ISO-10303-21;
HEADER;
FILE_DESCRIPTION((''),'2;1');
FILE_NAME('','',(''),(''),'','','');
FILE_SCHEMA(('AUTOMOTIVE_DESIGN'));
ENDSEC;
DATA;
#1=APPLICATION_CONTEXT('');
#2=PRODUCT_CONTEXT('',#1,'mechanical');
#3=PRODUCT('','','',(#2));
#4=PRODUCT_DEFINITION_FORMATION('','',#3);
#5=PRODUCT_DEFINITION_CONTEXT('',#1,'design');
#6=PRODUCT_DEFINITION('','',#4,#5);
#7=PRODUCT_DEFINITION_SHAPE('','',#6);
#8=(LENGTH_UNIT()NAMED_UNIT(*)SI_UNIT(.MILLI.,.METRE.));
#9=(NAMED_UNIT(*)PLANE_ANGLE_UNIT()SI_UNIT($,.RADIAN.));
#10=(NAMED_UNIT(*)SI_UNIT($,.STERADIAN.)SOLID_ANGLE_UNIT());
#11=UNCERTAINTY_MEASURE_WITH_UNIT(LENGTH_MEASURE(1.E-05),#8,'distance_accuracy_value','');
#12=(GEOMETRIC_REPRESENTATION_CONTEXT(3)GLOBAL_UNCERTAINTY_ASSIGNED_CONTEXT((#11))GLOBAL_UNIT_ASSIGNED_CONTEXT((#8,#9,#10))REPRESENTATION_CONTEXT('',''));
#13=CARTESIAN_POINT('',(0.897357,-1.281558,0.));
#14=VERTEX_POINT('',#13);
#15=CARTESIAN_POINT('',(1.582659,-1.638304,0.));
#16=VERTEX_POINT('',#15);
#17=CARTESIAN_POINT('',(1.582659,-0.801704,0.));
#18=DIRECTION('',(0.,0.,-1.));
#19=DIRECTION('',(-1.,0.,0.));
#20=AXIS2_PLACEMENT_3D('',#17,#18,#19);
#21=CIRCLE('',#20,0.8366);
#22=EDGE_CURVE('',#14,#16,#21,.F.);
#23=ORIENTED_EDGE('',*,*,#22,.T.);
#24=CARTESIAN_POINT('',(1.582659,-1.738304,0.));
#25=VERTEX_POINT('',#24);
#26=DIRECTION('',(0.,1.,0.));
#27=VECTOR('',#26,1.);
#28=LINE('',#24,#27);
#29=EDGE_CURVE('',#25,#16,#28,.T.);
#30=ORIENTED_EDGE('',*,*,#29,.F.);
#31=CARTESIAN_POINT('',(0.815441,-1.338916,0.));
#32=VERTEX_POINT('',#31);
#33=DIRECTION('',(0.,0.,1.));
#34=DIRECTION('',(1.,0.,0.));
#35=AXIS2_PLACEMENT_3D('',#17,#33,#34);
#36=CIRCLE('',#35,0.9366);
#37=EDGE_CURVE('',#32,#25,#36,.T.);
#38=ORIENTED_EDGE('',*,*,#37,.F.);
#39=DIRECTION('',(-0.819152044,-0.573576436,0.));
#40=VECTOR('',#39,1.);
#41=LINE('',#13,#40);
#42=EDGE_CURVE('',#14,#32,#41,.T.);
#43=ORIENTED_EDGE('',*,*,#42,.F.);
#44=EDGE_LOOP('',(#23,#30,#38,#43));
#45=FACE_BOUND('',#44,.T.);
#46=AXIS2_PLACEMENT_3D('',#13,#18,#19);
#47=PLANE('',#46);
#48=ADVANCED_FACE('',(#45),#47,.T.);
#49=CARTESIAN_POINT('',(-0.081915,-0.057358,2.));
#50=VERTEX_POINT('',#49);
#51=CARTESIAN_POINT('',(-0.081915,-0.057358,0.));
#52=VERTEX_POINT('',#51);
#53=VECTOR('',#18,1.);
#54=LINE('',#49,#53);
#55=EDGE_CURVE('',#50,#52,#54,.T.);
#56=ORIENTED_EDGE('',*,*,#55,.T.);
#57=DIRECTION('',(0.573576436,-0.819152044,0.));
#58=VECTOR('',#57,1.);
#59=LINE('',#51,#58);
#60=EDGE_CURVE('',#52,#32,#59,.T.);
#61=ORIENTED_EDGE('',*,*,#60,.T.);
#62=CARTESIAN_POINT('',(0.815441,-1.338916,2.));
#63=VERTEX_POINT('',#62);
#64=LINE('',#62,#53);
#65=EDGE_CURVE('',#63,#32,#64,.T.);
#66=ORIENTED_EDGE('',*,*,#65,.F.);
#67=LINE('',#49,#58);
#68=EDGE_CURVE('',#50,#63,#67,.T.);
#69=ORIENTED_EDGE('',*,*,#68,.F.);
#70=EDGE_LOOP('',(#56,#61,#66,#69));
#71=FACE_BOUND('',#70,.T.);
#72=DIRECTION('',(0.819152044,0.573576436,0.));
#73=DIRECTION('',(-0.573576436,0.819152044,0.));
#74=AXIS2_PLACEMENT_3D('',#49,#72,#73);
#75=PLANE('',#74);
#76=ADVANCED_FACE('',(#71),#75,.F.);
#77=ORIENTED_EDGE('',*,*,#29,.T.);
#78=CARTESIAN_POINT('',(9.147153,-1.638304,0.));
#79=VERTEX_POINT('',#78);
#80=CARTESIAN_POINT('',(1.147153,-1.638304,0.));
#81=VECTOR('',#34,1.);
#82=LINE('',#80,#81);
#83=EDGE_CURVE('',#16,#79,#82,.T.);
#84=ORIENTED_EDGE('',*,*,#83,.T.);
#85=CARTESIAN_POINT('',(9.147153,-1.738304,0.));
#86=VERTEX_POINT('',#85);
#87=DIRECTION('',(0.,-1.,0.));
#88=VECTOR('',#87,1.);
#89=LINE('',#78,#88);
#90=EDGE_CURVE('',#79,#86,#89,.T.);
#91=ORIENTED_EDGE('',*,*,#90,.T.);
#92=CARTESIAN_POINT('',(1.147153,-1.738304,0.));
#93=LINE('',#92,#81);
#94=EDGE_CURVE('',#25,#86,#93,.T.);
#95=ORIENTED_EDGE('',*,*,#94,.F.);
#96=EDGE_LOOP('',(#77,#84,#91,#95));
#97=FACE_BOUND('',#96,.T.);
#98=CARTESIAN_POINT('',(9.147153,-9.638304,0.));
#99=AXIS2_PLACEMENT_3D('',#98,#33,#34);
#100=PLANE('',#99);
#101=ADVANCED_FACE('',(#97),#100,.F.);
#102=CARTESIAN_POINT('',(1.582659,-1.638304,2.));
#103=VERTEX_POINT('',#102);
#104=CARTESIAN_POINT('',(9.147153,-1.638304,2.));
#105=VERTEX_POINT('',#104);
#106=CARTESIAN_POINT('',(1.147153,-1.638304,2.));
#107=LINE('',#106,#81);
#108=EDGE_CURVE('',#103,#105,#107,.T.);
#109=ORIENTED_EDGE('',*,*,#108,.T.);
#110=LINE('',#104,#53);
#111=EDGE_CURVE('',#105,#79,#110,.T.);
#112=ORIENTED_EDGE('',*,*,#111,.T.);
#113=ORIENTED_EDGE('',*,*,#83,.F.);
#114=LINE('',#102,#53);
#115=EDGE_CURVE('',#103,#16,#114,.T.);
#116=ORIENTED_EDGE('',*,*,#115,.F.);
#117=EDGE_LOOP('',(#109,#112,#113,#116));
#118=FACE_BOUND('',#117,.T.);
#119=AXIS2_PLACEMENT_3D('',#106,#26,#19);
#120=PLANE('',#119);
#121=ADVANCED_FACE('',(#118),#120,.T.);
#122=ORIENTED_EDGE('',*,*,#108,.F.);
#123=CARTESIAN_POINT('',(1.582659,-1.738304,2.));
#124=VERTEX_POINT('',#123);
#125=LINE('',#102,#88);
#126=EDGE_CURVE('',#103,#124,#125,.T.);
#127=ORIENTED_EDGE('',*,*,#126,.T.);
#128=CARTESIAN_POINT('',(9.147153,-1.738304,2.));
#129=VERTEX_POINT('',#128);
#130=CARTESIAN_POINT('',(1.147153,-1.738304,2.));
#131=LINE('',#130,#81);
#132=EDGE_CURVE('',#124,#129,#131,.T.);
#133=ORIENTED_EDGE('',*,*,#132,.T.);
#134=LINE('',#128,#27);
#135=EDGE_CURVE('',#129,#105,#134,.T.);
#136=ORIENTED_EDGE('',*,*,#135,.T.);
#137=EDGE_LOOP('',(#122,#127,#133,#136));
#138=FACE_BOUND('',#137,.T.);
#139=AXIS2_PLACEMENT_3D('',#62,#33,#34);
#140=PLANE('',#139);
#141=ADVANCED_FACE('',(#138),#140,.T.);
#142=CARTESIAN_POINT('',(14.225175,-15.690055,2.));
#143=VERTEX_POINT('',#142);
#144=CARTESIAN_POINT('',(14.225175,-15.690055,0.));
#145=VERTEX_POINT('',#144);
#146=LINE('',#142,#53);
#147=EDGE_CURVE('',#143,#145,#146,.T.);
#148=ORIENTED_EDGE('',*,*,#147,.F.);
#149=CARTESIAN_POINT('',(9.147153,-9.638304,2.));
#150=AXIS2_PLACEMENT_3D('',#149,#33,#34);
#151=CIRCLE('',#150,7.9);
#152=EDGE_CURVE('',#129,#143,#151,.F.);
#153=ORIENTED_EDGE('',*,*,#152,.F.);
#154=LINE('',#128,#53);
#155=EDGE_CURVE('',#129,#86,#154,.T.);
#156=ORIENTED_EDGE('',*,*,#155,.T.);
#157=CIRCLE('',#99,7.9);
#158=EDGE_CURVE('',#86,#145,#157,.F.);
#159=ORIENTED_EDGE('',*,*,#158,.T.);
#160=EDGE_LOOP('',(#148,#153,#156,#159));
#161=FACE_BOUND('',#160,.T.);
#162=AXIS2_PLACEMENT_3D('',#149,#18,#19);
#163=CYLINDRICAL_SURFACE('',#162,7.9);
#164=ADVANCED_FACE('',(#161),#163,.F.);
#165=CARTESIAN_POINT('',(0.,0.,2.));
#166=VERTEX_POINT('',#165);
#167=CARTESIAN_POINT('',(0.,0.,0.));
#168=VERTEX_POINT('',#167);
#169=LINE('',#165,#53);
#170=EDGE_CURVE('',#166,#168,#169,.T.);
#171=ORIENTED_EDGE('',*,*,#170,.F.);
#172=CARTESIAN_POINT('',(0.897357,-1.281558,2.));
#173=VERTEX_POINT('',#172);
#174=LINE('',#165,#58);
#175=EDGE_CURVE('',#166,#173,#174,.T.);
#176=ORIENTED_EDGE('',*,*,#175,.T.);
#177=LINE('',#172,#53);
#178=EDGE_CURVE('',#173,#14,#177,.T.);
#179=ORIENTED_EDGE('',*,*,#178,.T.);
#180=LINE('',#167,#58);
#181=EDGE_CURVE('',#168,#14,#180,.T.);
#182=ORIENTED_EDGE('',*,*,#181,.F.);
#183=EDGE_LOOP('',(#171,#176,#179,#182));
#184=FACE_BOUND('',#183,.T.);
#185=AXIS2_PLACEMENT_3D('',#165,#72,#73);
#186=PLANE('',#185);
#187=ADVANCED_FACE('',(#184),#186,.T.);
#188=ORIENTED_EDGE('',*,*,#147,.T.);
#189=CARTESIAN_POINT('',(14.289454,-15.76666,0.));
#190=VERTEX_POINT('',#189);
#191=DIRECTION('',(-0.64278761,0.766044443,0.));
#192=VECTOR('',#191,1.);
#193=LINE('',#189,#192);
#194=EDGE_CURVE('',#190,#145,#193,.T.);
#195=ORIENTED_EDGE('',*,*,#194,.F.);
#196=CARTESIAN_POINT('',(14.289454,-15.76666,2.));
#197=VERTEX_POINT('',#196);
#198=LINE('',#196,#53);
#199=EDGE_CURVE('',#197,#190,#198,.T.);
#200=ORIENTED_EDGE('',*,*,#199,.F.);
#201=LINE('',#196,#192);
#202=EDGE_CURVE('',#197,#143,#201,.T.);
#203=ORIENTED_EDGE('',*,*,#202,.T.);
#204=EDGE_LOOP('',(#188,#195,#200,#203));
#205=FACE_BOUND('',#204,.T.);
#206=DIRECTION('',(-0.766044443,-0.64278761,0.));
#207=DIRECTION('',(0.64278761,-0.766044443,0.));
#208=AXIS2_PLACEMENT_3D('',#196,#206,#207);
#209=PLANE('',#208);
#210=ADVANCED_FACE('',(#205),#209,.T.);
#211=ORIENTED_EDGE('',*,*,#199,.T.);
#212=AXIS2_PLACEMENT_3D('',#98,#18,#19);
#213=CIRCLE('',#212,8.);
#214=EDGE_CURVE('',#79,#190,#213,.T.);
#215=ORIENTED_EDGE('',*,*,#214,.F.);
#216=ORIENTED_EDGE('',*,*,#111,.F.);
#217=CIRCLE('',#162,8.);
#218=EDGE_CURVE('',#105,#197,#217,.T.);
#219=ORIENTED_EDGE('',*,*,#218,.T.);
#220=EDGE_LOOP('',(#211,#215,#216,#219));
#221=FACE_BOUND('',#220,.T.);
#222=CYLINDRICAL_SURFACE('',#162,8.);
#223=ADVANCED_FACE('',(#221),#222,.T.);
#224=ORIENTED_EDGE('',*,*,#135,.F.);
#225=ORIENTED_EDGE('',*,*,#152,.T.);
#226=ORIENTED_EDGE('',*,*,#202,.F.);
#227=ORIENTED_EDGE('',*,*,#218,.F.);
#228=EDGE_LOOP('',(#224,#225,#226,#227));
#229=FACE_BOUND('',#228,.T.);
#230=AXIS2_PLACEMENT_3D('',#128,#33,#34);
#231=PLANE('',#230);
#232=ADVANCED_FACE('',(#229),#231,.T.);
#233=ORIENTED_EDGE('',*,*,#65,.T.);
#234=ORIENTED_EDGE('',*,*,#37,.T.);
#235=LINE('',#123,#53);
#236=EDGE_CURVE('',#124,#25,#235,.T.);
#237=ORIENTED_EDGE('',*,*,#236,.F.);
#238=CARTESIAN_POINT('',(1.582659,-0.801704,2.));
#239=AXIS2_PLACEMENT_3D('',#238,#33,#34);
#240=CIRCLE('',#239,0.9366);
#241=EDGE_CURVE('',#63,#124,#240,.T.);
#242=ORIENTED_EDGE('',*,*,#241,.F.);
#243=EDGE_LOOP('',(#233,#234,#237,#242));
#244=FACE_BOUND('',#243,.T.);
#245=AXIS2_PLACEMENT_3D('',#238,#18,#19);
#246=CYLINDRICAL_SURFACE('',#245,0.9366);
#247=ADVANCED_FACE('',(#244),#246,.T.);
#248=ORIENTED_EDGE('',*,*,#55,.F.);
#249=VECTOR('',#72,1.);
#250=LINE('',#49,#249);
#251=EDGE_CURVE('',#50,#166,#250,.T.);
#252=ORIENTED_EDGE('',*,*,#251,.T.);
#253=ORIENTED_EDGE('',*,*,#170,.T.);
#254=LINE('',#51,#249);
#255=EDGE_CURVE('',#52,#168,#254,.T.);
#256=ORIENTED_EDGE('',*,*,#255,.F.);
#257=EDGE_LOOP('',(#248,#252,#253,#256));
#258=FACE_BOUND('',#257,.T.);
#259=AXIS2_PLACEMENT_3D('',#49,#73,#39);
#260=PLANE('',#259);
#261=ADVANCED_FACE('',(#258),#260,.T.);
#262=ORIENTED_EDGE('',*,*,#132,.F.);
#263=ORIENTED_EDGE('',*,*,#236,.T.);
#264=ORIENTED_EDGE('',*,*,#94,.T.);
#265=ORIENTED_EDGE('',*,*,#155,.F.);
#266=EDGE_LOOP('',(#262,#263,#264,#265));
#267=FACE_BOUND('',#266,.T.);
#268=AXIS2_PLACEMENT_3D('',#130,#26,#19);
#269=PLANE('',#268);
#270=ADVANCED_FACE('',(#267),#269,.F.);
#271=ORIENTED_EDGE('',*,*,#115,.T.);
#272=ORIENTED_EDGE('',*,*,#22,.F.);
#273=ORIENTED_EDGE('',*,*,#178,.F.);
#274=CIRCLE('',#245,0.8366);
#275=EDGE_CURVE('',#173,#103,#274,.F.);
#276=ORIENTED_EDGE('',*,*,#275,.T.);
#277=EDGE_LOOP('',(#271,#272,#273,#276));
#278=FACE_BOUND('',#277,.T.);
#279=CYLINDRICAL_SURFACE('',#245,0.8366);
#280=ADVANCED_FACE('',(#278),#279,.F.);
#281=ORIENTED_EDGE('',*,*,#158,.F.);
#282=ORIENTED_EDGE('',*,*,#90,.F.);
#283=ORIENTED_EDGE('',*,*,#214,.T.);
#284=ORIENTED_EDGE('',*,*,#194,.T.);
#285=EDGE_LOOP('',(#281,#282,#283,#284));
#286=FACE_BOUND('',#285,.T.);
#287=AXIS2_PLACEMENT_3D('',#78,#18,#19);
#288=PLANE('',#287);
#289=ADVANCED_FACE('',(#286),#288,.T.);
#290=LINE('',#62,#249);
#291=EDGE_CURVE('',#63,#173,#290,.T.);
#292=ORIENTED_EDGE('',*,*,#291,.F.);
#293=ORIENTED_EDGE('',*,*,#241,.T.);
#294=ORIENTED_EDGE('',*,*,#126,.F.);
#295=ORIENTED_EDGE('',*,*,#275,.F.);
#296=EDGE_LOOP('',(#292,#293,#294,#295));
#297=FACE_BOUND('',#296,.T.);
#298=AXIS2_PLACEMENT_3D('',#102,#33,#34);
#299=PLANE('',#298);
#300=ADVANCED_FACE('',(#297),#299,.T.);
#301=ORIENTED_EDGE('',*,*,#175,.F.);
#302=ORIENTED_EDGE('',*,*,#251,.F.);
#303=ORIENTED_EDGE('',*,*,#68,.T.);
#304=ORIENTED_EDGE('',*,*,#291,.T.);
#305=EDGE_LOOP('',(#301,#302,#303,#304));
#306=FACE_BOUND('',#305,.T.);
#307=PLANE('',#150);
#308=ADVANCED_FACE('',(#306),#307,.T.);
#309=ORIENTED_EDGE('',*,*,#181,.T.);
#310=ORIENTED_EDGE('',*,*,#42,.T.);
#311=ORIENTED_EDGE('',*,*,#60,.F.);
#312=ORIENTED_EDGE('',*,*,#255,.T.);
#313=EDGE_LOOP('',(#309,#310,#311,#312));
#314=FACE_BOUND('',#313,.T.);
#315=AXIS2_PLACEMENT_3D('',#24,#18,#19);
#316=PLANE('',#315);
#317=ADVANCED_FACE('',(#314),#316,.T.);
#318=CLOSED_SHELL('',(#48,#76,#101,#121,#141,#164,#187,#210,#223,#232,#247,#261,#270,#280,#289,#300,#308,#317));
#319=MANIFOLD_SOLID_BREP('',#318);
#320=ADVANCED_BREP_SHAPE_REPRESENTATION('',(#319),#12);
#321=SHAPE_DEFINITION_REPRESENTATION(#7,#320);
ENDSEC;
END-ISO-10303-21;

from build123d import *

# Parameters (mm, degrees)
BASE_FLANGE1_DEPTH = 2


# Sheet-metal steps are written as plain solids
with BuildPart() as part:
    # Sketch1 → Base-Flange1 (new body)
    with BuildSketch(Plane.XY):
        with BuildLine():
            Line((0, 0), (0.897356667, -1.281558135))
            ThreePointArc((0.897356667, -1.281558135), (1.196360377, -1.543777352), (1.582659267, -1.638304089))
            Line((1.582659267, -1.638304089), (9.147152873, -1.638304089))
            ThreePointArc((9.147152873, -1.638304089), (16.664693839, -6.902142942), (14.28945375, -15.766659634))
            Line((14.28945375, -15.766659634), (14.225174989, -15.690055189))
            ThreePointArc((14.225174989, -15.690055189), (16.570724577, -6.936344956), (9.147152873, -1.738304089))
            Line((9.147152873, -1.738304089), (1.582659267, -1.738304089))
            ThreePointArc((1.582659267, -1.738304089), (1.150185516, -1.632478435), (0.815441463, -1.338915779))
            Line((0.815441463, -1.338915779), (-0.081915204, -0.057357644))
            Line((-0.081915204, -0.057357644), (0, 0))
        make_face()
    extrude(amount=BASE_FLANGE1_DEPTH)


solid = part.part
